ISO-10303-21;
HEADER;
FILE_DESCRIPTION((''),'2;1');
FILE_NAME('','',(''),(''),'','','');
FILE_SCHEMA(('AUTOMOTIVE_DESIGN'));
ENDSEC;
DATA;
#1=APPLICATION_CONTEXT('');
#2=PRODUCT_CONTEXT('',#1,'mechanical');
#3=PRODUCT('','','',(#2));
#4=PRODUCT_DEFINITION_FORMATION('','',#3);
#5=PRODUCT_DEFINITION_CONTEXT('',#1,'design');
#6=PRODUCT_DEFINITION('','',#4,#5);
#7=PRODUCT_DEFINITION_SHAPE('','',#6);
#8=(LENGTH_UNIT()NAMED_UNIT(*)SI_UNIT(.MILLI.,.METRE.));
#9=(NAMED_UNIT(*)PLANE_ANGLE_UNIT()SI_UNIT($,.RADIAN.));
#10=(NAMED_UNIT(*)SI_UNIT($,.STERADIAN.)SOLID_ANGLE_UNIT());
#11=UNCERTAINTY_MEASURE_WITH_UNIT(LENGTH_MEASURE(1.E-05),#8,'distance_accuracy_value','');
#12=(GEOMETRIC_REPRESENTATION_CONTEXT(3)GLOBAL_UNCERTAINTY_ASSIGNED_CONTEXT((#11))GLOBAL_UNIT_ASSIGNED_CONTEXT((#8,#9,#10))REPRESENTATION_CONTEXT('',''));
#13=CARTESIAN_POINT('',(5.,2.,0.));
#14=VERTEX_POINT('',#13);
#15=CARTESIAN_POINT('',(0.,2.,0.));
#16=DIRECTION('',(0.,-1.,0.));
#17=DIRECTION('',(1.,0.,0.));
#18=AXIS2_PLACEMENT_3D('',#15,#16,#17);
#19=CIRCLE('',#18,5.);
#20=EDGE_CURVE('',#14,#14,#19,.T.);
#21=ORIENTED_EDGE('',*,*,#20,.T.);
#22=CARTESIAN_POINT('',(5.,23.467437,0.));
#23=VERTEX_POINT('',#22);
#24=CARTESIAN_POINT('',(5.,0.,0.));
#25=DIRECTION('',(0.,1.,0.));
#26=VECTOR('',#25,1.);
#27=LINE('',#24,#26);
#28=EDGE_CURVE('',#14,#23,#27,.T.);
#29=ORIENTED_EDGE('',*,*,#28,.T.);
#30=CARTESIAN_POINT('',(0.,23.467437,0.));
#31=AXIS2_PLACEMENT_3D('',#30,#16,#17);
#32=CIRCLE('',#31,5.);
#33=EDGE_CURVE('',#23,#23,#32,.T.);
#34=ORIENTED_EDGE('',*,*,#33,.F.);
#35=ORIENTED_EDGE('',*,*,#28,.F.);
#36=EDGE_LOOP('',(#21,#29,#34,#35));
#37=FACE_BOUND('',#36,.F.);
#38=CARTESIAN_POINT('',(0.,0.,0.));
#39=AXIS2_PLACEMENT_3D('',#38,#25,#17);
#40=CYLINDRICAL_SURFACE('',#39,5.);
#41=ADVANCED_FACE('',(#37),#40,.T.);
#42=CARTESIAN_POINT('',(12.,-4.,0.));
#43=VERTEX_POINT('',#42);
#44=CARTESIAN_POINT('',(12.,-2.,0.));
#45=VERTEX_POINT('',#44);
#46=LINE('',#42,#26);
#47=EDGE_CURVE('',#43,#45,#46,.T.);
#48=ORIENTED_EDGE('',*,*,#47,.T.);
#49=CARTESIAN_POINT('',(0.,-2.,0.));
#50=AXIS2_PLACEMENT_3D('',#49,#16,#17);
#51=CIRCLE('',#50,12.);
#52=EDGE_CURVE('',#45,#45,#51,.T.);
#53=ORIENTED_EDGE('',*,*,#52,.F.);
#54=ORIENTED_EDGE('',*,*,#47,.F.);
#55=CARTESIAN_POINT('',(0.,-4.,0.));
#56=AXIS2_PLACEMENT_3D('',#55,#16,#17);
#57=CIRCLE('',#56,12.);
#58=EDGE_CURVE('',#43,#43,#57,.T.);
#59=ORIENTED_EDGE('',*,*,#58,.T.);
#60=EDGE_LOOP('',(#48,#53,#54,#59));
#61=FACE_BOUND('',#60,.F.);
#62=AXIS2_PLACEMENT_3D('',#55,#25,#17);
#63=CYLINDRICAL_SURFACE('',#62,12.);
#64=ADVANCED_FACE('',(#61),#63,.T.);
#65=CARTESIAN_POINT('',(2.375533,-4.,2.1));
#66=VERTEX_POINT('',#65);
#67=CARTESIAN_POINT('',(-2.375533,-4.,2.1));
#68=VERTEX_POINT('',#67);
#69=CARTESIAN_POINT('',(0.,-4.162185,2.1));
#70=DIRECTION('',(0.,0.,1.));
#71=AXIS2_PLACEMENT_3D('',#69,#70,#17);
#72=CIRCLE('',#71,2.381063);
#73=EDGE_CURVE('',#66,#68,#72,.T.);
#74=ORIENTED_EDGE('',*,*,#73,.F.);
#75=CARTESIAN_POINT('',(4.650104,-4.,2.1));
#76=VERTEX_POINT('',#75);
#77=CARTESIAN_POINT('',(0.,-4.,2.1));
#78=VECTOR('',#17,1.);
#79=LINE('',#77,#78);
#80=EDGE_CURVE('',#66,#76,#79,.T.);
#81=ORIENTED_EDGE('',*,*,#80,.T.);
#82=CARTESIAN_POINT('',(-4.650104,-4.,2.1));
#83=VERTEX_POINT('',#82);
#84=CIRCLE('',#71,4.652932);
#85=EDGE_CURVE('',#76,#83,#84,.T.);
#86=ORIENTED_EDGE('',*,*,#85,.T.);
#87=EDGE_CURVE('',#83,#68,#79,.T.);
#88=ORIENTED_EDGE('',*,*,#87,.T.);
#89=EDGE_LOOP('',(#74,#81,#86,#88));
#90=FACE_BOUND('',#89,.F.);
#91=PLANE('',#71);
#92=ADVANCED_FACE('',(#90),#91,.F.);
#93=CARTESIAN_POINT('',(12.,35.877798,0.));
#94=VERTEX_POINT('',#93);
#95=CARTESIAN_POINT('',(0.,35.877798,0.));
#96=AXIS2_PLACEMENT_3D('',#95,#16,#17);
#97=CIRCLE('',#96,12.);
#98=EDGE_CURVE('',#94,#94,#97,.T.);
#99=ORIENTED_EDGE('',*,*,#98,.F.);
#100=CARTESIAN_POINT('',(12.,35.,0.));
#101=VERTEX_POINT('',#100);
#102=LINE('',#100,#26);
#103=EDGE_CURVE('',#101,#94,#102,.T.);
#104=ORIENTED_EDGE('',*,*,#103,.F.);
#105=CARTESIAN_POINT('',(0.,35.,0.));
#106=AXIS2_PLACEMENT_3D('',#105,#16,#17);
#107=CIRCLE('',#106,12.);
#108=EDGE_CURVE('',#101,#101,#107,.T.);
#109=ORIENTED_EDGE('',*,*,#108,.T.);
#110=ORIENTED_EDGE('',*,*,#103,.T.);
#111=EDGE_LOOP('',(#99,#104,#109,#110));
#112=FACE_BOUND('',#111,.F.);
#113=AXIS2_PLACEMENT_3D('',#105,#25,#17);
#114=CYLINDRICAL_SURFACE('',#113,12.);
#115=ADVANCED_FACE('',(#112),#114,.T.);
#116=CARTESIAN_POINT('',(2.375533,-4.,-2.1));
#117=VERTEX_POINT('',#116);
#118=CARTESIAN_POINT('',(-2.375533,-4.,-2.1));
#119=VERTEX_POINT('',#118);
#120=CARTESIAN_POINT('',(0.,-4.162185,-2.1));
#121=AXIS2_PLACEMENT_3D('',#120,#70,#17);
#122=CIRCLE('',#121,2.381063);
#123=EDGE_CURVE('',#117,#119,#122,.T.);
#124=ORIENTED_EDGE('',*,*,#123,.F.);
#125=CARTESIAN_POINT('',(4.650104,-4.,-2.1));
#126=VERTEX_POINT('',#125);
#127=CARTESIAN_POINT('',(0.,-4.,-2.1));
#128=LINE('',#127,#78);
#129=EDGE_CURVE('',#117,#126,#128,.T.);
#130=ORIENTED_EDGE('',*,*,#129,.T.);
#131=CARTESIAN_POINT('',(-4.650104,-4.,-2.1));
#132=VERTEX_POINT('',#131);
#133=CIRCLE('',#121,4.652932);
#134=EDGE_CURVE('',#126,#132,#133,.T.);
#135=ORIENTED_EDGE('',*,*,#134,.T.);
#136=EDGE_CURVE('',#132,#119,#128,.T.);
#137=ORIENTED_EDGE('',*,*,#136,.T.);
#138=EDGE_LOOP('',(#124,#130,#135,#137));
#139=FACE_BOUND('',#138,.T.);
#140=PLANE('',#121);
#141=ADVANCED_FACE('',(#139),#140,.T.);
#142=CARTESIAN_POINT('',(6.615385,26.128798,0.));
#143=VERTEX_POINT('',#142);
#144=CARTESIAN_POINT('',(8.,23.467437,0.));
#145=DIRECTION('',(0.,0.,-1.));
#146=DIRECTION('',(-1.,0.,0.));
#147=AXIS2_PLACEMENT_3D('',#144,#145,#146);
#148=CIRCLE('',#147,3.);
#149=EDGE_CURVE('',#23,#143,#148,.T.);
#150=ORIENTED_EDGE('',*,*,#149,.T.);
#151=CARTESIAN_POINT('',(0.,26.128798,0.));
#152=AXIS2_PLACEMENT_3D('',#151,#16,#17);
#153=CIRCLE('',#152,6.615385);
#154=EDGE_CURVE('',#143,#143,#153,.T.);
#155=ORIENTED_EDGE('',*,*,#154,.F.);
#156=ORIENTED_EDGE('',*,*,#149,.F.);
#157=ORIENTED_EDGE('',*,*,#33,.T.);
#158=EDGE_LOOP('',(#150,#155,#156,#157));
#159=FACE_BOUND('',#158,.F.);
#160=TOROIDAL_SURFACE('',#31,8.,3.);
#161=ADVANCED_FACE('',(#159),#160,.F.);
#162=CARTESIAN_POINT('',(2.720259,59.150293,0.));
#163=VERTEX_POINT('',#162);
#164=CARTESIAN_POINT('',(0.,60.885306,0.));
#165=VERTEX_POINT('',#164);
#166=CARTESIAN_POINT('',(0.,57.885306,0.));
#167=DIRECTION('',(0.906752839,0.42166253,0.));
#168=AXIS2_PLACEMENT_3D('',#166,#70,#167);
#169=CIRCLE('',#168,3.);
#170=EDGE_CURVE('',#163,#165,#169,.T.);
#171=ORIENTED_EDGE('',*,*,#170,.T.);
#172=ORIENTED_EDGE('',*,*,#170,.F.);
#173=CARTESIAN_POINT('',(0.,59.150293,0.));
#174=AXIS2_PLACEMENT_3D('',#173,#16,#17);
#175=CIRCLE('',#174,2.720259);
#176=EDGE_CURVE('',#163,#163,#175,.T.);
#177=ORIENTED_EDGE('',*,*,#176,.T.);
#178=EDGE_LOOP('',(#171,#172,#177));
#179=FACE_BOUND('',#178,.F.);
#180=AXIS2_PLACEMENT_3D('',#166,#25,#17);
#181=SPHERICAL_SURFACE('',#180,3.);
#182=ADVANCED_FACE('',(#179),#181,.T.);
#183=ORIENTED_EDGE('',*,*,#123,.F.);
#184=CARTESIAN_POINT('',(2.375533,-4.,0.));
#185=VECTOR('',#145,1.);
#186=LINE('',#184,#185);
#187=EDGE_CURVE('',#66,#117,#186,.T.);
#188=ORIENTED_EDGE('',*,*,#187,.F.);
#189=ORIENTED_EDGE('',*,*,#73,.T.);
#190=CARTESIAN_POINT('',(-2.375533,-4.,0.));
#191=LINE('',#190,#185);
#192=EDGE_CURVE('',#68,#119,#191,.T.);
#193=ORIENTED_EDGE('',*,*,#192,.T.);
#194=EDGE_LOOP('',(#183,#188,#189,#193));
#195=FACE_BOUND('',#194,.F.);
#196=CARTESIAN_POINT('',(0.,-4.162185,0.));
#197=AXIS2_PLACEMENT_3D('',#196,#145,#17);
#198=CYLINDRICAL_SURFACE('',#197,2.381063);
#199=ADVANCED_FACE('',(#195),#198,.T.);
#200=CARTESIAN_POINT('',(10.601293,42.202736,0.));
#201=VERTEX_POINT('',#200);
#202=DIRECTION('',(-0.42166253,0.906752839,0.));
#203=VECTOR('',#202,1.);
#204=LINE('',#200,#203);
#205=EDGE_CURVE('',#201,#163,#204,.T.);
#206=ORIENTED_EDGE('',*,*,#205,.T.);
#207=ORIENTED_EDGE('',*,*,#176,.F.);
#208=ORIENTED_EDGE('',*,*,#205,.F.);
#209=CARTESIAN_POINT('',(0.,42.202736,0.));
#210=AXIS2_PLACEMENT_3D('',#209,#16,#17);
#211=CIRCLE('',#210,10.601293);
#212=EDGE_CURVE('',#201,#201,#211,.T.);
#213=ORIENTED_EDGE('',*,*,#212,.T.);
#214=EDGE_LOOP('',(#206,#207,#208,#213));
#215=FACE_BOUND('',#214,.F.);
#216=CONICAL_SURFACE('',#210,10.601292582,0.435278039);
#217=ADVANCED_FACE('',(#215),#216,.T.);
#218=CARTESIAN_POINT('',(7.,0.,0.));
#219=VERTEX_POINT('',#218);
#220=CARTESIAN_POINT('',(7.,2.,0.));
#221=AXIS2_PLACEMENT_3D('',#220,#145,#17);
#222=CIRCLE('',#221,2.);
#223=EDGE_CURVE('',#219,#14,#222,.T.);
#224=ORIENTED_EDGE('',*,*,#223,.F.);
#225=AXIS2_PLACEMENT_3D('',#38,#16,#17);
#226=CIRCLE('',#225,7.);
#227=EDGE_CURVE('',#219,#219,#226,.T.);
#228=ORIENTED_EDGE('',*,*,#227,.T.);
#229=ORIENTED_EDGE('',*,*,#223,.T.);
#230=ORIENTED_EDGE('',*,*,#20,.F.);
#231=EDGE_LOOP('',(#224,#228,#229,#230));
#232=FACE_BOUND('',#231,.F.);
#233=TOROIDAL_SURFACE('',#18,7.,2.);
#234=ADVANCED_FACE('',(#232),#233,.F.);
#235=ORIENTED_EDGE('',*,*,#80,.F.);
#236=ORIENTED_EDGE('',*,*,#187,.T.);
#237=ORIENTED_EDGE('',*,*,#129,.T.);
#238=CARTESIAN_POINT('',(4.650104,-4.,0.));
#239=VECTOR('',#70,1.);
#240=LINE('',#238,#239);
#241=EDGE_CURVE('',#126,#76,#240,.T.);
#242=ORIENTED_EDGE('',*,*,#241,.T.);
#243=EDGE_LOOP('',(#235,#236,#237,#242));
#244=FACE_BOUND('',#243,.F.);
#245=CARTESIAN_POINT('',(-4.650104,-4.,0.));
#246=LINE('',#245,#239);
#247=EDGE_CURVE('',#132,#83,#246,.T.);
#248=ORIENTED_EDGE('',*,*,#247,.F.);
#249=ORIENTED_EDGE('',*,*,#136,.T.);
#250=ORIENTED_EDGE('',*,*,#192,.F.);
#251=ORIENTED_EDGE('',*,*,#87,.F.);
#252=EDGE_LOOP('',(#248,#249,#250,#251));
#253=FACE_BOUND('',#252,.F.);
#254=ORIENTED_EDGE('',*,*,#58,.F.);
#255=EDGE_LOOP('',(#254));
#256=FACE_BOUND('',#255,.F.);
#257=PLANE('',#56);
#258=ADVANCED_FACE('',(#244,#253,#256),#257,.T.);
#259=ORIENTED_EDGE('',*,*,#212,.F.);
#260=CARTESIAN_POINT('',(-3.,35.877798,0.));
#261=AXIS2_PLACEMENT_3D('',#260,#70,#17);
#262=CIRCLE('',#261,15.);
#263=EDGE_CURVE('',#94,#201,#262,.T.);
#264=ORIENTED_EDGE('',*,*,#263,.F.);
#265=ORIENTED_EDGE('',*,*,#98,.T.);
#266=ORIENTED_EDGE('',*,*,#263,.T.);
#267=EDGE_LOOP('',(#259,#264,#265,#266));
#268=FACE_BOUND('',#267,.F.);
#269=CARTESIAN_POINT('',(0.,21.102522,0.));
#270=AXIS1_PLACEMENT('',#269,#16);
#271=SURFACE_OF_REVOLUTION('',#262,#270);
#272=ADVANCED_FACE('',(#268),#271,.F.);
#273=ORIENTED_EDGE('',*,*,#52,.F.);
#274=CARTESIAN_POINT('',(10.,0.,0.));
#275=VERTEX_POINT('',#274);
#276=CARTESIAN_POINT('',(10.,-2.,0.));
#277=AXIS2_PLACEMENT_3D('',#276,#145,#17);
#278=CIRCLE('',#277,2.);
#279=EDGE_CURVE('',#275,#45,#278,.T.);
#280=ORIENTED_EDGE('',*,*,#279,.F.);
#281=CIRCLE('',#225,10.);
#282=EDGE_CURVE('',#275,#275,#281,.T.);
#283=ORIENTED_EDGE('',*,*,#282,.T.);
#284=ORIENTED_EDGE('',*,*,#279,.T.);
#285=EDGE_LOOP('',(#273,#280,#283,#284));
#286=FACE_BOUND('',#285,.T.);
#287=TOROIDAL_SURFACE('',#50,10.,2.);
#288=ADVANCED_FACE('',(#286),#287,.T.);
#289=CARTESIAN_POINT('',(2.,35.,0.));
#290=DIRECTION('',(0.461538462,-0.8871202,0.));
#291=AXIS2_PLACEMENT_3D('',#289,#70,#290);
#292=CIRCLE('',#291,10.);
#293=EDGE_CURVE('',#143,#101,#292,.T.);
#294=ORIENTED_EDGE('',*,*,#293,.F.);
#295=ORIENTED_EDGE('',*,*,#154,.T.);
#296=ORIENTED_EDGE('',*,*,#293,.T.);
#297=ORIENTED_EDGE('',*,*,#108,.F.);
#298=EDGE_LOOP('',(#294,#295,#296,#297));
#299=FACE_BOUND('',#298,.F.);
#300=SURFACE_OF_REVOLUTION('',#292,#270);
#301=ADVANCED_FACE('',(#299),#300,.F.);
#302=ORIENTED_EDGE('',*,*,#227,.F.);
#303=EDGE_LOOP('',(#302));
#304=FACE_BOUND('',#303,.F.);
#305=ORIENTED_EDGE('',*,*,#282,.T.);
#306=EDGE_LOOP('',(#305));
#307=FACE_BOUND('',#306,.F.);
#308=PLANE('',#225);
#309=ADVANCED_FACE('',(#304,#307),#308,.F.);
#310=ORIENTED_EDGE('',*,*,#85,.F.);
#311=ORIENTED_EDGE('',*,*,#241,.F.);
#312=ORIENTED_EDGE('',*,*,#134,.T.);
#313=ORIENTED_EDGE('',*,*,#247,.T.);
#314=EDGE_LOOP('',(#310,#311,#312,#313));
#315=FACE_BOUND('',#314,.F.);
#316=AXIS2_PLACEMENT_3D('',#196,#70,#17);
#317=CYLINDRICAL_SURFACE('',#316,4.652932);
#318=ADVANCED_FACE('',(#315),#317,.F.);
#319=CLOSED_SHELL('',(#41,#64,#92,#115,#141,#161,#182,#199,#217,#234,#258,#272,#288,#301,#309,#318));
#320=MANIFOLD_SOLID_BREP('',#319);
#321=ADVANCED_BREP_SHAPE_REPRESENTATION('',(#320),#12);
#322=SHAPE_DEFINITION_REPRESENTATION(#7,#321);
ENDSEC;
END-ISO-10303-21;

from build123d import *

# Parameters (mm, degrees)
F2_R     = 2
F3_R     = 2
F4_R     = 4.6529317806
F4_R_2   = 2.3810630886
F5_DEPTH = 2.1


# Not quite as in the source:
# - a feature names something its author has since deleted; it is built from what else it names


with BuildPart() as f1:
    # F0 (on Top) → F1 (revolve)
    with BuildSketch(Plane.XY):
        with BuildLine():
            Line((12, 0), (5, 0))
            Line((5, 0), (5, 23.4674374053))
            ThreePointArc((5, 23.4674374053), (5.4354487572, 25.0240609703), (6.6153846154, 26.1287980041))
            ThreePointArc((6.6153846154, 26.1287980041), (10.5485041427, 29.8112547834), (12, 35))
            Line((12, 35), (12, 35.8777977526))
            ThreePointArc((12, 35.8777977526), (11.6461494723, 39.1166718836), (10.6012925819, 42.2027357051))
            Line((10.6012925819, 42.2027357051), (2.7202585164, 59.1502932902))
            ThreePointArc((2.7202585164, 59.1502932902), (1.6132323497, 60.414629994), (0, 60.8853056997))
            Line((0, 60.8853056997), (0, 25))
            Line((0, 25), (0, 17.2050446272))
            Line((0, 17.2050446272), (0, -4))
            Line((0, -4), (9, -4))
            Line((9, -4), (12, -4))
            Line((12, -4), (12, 0))
        make_face()
    revolve(axis=Axis((0, 21.1025223136, 0), (0, -1, 0)))

    # F2
    f2_edges = [f1.edges().sort_by_distance(p)[0] for p in [
        (-12, 0, 0),
    ]]
    fillet(f2_edges, radius=F2_R)

    # F3
    f3_edges = [f1.edges().sort_by_distance(p)[0] for p in [
        (-5, 0, 0),
    ]]
    fillet(f3_edges, radius=F3_R)

    # F4 (on Top) → F5 (cut, symmetric)
    with BuildSketch(Plane.XY):
        with Locations((0, -4.1621848941)):
            Circle(F4_R)
        with Locations((0, -4.1621848941)):
            Circle(F4_R_2, mode=Mode.SUBTRACT)
    extrude(amount=F5_DEPTH, both=True, mode=Mode.SUBTRACT)


solid = f1.part
